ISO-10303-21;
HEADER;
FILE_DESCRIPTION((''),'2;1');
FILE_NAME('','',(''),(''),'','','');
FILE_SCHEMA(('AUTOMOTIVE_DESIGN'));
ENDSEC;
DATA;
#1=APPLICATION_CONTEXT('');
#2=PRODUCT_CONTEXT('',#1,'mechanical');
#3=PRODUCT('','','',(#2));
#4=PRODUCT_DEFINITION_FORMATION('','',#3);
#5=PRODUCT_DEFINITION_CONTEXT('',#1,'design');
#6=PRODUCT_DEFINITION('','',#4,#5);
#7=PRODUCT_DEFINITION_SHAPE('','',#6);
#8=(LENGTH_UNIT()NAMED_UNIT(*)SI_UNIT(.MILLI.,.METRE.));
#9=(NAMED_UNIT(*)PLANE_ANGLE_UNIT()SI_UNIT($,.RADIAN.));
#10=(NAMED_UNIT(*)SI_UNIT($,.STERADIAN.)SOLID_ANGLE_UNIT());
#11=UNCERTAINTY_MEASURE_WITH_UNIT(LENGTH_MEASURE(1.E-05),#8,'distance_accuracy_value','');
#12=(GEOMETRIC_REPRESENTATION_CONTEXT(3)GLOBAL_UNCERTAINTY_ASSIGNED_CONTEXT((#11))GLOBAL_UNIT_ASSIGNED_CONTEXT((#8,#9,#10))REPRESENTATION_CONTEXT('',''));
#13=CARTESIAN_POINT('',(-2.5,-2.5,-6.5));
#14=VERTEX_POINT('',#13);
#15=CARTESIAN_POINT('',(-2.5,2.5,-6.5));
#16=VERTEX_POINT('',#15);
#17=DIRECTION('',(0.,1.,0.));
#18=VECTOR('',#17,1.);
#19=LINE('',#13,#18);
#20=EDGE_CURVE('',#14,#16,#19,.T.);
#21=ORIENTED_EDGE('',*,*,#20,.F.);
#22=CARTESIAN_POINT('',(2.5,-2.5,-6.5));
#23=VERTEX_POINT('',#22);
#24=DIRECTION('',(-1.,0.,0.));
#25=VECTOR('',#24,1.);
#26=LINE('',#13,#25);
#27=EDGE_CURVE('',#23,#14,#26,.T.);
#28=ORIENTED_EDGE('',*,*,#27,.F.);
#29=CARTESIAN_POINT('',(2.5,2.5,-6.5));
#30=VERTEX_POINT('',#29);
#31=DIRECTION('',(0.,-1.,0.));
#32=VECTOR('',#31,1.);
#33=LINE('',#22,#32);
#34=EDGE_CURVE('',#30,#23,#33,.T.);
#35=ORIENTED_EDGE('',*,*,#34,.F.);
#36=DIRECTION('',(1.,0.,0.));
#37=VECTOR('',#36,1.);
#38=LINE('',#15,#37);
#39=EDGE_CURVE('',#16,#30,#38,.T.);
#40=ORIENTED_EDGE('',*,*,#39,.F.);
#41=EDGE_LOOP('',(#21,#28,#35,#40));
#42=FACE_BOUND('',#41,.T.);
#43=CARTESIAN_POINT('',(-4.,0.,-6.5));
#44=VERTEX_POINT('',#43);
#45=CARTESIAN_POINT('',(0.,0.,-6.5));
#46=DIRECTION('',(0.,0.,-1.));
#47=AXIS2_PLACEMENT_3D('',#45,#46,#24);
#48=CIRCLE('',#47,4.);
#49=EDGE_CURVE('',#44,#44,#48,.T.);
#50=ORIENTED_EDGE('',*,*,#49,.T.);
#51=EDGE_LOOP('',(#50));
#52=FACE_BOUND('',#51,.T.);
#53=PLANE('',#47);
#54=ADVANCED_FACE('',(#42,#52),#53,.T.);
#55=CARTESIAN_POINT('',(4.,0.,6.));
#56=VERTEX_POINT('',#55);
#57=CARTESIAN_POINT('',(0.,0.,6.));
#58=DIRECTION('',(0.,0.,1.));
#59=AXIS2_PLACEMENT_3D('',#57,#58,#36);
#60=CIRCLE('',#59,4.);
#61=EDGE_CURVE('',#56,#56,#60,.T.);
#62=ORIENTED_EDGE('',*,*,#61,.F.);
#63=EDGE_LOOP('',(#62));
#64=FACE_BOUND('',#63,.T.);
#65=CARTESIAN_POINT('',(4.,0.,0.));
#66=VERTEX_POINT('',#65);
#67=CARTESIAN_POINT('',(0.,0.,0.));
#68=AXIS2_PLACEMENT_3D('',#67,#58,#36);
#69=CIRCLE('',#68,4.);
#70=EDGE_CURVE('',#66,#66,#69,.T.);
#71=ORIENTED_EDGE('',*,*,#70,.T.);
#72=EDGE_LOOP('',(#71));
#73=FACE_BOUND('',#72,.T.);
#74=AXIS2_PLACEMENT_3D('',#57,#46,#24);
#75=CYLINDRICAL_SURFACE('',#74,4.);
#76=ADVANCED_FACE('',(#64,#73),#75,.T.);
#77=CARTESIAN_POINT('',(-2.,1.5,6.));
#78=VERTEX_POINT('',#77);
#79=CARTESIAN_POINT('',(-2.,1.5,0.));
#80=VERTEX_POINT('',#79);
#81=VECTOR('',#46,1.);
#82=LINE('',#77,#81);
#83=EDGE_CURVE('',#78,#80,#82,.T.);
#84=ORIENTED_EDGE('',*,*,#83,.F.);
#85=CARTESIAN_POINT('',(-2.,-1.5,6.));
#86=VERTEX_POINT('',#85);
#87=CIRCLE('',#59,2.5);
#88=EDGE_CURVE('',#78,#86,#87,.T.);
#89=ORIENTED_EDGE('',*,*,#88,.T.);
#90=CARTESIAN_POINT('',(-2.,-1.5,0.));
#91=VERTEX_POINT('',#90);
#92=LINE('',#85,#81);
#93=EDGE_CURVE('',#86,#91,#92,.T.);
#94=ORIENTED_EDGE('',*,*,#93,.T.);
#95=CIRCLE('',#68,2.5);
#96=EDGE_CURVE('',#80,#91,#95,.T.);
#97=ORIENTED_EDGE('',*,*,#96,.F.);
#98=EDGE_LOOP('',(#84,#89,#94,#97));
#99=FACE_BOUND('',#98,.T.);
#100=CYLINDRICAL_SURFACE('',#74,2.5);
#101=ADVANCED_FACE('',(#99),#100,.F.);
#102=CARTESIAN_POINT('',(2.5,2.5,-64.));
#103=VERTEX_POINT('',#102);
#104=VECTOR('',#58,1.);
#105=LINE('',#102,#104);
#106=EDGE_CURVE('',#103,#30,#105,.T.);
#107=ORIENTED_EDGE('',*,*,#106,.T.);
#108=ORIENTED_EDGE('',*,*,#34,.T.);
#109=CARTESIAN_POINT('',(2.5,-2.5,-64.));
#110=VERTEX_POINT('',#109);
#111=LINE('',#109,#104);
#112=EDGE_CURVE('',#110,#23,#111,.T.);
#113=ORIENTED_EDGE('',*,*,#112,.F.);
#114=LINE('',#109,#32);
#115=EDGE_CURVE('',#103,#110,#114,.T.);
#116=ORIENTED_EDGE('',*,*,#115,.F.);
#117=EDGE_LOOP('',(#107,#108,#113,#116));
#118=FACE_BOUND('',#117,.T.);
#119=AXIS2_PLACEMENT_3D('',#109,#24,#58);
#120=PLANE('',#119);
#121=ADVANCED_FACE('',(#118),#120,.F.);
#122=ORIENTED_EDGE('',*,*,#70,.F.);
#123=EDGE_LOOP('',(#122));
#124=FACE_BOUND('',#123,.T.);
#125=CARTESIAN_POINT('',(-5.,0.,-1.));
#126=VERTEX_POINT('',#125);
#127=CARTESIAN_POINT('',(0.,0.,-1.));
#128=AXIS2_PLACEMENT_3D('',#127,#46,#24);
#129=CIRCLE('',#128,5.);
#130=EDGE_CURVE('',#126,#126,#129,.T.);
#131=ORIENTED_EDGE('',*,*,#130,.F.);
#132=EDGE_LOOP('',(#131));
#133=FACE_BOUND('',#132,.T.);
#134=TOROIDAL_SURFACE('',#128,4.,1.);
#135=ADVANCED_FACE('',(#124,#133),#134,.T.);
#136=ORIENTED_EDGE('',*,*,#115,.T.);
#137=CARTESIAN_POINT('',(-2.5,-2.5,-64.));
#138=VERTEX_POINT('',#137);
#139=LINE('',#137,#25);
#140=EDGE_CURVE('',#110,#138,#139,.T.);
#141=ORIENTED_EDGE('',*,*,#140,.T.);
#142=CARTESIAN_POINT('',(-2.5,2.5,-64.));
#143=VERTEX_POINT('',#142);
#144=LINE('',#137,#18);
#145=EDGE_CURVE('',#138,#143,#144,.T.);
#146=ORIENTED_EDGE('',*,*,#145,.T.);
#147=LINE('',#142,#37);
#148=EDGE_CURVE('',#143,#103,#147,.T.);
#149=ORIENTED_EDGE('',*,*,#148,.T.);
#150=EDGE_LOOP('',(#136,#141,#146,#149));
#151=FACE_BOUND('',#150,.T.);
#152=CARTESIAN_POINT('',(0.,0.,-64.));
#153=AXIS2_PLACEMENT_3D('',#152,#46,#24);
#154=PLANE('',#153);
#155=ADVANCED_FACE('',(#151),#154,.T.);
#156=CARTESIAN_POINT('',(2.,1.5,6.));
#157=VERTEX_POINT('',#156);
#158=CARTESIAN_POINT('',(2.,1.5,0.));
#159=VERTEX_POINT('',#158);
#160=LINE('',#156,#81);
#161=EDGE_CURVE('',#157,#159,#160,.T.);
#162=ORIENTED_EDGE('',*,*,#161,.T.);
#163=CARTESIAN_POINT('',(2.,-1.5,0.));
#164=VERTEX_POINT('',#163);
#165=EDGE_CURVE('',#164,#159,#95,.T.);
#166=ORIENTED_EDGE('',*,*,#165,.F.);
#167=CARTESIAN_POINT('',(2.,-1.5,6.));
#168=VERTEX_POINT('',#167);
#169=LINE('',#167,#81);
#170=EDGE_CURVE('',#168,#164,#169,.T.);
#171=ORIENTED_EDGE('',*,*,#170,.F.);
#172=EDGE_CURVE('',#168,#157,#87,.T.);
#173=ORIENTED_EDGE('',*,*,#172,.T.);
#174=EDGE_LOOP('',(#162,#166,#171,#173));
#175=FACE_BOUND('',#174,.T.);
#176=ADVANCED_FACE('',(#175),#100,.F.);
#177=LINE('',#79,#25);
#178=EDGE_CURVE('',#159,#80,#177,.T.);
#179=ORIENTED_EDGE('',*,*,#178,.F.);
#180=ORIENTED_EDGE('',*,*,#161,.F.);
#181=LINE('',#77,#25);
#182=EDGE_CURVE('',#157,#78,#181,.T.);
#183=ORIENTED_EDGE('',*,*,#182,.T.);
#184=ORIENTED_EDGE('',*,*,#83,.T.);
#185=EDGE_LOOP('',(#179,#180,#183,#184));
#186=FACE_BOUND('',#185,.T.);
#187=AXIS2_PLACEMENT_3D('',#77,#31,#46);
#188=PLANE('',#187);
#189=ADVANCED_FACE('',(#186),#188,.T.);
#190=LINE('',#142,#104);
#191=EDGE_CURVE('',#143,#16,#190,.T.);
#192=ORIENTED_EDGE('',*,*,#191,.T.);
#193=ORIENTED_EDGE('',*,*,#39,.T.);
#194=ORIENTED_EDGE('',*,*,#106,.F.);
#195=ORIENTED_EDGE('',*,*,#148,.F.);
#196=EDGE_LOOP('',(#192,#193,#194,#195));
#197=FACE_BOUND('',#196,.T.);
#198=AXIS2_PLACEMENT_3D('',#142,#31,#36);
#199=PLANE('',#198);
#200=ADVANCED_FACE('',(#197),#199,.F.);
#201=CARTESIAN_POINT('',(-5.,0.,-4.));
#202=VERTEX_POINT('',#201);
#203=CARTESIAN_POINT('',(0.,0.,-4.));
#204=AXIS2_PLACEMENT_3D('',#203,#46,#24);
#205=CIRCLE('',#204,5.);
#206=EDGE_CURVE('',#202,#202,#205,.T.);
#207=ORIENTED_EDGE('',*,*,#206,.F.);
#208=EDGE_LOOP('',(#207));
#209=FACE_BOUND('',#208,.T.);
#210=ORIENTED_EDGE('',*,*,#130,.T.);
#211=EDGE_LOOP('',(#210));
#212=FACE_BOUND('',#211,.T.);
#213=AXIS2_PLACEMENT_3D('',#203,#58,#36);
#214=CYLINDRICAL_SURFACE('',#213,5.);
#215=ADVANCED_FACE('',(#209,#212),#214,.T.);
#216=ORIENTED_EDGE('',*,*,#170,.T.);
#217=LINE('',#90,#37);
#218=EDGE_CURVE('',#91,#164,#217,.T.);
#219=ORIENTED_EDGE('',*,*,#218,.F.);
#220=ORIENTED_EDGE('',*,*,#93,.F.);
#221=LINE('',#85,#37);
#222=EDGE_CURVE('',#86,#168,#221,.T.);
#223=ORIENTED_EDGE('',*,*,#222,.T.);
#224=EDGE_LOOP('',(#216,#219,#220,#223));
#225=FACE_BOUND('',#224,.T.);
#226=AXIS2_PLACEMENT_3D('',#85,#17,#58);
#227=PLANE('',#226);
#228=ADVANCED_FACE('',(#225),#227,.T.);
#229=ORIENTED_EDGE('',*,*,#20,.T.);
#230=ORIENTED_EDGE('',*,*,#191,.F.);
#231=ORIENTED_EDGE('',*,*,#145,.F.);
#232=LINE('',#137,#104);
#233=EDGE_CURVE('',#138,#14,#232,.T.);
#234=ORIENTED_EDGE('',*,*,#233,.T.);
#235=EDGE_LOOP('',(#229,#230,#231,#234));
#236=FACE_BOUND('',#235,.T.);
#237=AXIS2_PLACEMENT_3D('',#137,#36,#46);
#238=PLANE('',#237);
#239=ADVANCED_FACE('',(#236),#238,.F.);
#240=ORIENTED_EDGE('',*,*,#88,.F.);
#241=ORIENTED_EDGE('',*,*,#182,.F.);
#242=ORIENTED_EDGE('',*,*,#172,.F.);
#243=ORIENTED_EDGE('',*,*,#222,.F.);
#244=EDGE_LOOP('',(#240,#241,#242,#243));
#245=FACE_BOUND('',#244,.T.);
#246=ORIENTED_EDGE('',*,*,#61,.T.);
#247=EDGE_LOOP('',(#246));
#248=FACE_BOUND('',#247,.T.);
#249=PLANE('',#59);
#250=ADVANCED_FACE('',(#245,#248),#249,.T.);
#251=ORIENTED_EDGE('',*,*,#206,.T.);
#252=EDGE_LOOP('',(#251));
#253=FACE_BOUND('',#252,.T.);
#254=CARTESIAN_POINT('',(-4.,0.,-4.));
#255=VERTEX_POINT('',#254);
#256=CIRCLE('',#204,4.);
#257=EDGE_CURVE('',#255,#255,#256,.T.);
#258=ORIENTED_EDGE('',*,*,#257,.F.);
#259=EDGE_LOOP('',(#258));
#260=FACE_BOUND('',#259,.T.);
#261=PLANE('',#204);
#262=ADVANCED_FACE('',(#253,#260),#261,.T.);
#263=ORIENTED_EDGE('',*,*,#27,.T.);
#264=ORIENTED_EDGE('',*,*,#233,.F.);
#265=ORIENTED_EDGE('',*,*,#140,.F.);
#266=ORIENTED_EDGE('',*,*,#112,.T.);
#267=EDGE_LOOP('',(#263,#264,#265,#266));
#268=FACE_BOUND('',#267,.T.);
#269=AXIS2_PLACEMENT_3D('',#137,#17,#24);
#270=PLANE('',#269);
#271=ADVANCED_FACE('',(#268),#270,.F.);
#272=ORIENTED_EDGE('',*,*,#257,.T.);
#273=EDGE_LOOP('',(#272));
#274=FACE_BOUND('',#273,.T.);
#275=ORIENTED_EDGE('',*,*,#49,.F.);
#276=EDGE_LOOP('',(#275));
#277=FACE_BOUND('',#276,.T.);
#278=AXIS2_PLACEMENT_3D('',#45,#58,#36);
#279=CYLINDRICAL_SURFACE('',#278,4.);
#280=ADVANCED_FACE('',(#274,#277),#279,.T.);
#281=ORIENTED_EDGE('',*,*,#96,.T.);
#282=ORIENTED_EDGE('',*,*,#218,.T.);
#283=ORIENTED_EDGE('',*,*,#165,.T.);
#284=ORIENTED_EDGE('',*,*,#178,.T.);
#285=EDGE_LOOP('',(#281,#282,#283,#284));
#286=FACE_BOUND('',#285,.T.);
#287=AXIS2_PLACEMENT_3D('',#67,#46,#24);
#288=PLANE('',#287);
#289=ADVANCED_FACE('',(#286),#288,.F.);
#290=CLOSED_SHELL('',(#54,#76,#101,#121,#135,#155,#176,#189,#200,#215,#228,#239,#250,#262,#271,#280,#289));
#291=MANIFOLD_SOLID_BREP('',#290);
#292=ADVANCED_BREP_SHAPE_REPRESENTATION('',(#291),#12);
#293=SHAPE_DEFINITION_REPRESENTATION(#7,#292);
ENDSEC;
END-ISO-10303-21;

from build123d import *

# Parameters (mm, degrees)
ESQUISSE1_R        = 4
BOSS_EXTRU_1_DEPTH = 6
ESQUISSE2_R        = 5
BOSS_EXTRU_2_DEPTH = 4
CONG_1_R           = 1
ESQUISSE3_W        = 5
ESQUISSE3_H        = 5
BOSS_EXTRU_3_DEPTH = 60
BOSS_EXTRU_4_START = 2.5
ESQUISSE4_R        = 4
BOSS_EXTRU_4_DEPTH = 2.5


with BuildPart() as part:
    # Esquisse1 → Boss.-Extru.1 (new body)
    with BuildSketch(Plane.XY):
        Circle(ESQUISSE1_R)
        with BuildLine():
            Line((-2, 1.5), (2, 1.5))
            ThreePointArc((2, 1.5), (2.5, 0), (2, -1.5))
            Line((2, -1.5), (-2, -1.5))
            ThreePointArc((-2, -1.5), (-2.5, 0), (-2, 1.5))
        make_face(mode=Mode.SUBTRACT)
    extrude(amount=BOSS_EXTRU_1_DEPTH)

    # Esquisse2 → Boss.-Extru.2 (add)
    with BuildSketch(Plane(origin=(0, 0, 0), x_dir=(-1, 0, 0), z_dir=(0, 0, -1))):
        Circle(ESQUISSE2_R)
    extrude(amount=BOSS_EXTRU_2_DEPTH)

    # Congé1
    cong_1_edges = [part.edges().sort_by_distance(p)[0] for p in [
        (5, 0, 0),
    ]]
    fillet(cong_1_edges, radius=CONG_1_R - 0.0001)  # a hair under: the kernel refuses the full size

    # Esquisse3 → Boss.-Extru.3 (add)
    with BuildSketch(Plane(origin=(0, 0, -4), x_dir=(-1, 0, 0), z_dir=(0, 0, -1))):
        Rectangle(ESQUISSE3_W, ESQUISSE3_H)
    extrude(amount=BOSS_EXTRU_3_DEPTH)

    # Esquisse4 → Boss.-Extru.4 (add)
    with BuildSketch(Plane(origin=(0, 0, -4), x_dir=(-1, 0, 0), z_dir=(0, 0, -1)).offset(BOSS_EXTRU_4_START)):
        with Locations(Location((0, 0, 0), (0, 0, 180))):
            Circle(ESQUISSE4_R)
    extrude(amount=-BOSS_EXTRU_4_DEPTH)


solid = part.part
